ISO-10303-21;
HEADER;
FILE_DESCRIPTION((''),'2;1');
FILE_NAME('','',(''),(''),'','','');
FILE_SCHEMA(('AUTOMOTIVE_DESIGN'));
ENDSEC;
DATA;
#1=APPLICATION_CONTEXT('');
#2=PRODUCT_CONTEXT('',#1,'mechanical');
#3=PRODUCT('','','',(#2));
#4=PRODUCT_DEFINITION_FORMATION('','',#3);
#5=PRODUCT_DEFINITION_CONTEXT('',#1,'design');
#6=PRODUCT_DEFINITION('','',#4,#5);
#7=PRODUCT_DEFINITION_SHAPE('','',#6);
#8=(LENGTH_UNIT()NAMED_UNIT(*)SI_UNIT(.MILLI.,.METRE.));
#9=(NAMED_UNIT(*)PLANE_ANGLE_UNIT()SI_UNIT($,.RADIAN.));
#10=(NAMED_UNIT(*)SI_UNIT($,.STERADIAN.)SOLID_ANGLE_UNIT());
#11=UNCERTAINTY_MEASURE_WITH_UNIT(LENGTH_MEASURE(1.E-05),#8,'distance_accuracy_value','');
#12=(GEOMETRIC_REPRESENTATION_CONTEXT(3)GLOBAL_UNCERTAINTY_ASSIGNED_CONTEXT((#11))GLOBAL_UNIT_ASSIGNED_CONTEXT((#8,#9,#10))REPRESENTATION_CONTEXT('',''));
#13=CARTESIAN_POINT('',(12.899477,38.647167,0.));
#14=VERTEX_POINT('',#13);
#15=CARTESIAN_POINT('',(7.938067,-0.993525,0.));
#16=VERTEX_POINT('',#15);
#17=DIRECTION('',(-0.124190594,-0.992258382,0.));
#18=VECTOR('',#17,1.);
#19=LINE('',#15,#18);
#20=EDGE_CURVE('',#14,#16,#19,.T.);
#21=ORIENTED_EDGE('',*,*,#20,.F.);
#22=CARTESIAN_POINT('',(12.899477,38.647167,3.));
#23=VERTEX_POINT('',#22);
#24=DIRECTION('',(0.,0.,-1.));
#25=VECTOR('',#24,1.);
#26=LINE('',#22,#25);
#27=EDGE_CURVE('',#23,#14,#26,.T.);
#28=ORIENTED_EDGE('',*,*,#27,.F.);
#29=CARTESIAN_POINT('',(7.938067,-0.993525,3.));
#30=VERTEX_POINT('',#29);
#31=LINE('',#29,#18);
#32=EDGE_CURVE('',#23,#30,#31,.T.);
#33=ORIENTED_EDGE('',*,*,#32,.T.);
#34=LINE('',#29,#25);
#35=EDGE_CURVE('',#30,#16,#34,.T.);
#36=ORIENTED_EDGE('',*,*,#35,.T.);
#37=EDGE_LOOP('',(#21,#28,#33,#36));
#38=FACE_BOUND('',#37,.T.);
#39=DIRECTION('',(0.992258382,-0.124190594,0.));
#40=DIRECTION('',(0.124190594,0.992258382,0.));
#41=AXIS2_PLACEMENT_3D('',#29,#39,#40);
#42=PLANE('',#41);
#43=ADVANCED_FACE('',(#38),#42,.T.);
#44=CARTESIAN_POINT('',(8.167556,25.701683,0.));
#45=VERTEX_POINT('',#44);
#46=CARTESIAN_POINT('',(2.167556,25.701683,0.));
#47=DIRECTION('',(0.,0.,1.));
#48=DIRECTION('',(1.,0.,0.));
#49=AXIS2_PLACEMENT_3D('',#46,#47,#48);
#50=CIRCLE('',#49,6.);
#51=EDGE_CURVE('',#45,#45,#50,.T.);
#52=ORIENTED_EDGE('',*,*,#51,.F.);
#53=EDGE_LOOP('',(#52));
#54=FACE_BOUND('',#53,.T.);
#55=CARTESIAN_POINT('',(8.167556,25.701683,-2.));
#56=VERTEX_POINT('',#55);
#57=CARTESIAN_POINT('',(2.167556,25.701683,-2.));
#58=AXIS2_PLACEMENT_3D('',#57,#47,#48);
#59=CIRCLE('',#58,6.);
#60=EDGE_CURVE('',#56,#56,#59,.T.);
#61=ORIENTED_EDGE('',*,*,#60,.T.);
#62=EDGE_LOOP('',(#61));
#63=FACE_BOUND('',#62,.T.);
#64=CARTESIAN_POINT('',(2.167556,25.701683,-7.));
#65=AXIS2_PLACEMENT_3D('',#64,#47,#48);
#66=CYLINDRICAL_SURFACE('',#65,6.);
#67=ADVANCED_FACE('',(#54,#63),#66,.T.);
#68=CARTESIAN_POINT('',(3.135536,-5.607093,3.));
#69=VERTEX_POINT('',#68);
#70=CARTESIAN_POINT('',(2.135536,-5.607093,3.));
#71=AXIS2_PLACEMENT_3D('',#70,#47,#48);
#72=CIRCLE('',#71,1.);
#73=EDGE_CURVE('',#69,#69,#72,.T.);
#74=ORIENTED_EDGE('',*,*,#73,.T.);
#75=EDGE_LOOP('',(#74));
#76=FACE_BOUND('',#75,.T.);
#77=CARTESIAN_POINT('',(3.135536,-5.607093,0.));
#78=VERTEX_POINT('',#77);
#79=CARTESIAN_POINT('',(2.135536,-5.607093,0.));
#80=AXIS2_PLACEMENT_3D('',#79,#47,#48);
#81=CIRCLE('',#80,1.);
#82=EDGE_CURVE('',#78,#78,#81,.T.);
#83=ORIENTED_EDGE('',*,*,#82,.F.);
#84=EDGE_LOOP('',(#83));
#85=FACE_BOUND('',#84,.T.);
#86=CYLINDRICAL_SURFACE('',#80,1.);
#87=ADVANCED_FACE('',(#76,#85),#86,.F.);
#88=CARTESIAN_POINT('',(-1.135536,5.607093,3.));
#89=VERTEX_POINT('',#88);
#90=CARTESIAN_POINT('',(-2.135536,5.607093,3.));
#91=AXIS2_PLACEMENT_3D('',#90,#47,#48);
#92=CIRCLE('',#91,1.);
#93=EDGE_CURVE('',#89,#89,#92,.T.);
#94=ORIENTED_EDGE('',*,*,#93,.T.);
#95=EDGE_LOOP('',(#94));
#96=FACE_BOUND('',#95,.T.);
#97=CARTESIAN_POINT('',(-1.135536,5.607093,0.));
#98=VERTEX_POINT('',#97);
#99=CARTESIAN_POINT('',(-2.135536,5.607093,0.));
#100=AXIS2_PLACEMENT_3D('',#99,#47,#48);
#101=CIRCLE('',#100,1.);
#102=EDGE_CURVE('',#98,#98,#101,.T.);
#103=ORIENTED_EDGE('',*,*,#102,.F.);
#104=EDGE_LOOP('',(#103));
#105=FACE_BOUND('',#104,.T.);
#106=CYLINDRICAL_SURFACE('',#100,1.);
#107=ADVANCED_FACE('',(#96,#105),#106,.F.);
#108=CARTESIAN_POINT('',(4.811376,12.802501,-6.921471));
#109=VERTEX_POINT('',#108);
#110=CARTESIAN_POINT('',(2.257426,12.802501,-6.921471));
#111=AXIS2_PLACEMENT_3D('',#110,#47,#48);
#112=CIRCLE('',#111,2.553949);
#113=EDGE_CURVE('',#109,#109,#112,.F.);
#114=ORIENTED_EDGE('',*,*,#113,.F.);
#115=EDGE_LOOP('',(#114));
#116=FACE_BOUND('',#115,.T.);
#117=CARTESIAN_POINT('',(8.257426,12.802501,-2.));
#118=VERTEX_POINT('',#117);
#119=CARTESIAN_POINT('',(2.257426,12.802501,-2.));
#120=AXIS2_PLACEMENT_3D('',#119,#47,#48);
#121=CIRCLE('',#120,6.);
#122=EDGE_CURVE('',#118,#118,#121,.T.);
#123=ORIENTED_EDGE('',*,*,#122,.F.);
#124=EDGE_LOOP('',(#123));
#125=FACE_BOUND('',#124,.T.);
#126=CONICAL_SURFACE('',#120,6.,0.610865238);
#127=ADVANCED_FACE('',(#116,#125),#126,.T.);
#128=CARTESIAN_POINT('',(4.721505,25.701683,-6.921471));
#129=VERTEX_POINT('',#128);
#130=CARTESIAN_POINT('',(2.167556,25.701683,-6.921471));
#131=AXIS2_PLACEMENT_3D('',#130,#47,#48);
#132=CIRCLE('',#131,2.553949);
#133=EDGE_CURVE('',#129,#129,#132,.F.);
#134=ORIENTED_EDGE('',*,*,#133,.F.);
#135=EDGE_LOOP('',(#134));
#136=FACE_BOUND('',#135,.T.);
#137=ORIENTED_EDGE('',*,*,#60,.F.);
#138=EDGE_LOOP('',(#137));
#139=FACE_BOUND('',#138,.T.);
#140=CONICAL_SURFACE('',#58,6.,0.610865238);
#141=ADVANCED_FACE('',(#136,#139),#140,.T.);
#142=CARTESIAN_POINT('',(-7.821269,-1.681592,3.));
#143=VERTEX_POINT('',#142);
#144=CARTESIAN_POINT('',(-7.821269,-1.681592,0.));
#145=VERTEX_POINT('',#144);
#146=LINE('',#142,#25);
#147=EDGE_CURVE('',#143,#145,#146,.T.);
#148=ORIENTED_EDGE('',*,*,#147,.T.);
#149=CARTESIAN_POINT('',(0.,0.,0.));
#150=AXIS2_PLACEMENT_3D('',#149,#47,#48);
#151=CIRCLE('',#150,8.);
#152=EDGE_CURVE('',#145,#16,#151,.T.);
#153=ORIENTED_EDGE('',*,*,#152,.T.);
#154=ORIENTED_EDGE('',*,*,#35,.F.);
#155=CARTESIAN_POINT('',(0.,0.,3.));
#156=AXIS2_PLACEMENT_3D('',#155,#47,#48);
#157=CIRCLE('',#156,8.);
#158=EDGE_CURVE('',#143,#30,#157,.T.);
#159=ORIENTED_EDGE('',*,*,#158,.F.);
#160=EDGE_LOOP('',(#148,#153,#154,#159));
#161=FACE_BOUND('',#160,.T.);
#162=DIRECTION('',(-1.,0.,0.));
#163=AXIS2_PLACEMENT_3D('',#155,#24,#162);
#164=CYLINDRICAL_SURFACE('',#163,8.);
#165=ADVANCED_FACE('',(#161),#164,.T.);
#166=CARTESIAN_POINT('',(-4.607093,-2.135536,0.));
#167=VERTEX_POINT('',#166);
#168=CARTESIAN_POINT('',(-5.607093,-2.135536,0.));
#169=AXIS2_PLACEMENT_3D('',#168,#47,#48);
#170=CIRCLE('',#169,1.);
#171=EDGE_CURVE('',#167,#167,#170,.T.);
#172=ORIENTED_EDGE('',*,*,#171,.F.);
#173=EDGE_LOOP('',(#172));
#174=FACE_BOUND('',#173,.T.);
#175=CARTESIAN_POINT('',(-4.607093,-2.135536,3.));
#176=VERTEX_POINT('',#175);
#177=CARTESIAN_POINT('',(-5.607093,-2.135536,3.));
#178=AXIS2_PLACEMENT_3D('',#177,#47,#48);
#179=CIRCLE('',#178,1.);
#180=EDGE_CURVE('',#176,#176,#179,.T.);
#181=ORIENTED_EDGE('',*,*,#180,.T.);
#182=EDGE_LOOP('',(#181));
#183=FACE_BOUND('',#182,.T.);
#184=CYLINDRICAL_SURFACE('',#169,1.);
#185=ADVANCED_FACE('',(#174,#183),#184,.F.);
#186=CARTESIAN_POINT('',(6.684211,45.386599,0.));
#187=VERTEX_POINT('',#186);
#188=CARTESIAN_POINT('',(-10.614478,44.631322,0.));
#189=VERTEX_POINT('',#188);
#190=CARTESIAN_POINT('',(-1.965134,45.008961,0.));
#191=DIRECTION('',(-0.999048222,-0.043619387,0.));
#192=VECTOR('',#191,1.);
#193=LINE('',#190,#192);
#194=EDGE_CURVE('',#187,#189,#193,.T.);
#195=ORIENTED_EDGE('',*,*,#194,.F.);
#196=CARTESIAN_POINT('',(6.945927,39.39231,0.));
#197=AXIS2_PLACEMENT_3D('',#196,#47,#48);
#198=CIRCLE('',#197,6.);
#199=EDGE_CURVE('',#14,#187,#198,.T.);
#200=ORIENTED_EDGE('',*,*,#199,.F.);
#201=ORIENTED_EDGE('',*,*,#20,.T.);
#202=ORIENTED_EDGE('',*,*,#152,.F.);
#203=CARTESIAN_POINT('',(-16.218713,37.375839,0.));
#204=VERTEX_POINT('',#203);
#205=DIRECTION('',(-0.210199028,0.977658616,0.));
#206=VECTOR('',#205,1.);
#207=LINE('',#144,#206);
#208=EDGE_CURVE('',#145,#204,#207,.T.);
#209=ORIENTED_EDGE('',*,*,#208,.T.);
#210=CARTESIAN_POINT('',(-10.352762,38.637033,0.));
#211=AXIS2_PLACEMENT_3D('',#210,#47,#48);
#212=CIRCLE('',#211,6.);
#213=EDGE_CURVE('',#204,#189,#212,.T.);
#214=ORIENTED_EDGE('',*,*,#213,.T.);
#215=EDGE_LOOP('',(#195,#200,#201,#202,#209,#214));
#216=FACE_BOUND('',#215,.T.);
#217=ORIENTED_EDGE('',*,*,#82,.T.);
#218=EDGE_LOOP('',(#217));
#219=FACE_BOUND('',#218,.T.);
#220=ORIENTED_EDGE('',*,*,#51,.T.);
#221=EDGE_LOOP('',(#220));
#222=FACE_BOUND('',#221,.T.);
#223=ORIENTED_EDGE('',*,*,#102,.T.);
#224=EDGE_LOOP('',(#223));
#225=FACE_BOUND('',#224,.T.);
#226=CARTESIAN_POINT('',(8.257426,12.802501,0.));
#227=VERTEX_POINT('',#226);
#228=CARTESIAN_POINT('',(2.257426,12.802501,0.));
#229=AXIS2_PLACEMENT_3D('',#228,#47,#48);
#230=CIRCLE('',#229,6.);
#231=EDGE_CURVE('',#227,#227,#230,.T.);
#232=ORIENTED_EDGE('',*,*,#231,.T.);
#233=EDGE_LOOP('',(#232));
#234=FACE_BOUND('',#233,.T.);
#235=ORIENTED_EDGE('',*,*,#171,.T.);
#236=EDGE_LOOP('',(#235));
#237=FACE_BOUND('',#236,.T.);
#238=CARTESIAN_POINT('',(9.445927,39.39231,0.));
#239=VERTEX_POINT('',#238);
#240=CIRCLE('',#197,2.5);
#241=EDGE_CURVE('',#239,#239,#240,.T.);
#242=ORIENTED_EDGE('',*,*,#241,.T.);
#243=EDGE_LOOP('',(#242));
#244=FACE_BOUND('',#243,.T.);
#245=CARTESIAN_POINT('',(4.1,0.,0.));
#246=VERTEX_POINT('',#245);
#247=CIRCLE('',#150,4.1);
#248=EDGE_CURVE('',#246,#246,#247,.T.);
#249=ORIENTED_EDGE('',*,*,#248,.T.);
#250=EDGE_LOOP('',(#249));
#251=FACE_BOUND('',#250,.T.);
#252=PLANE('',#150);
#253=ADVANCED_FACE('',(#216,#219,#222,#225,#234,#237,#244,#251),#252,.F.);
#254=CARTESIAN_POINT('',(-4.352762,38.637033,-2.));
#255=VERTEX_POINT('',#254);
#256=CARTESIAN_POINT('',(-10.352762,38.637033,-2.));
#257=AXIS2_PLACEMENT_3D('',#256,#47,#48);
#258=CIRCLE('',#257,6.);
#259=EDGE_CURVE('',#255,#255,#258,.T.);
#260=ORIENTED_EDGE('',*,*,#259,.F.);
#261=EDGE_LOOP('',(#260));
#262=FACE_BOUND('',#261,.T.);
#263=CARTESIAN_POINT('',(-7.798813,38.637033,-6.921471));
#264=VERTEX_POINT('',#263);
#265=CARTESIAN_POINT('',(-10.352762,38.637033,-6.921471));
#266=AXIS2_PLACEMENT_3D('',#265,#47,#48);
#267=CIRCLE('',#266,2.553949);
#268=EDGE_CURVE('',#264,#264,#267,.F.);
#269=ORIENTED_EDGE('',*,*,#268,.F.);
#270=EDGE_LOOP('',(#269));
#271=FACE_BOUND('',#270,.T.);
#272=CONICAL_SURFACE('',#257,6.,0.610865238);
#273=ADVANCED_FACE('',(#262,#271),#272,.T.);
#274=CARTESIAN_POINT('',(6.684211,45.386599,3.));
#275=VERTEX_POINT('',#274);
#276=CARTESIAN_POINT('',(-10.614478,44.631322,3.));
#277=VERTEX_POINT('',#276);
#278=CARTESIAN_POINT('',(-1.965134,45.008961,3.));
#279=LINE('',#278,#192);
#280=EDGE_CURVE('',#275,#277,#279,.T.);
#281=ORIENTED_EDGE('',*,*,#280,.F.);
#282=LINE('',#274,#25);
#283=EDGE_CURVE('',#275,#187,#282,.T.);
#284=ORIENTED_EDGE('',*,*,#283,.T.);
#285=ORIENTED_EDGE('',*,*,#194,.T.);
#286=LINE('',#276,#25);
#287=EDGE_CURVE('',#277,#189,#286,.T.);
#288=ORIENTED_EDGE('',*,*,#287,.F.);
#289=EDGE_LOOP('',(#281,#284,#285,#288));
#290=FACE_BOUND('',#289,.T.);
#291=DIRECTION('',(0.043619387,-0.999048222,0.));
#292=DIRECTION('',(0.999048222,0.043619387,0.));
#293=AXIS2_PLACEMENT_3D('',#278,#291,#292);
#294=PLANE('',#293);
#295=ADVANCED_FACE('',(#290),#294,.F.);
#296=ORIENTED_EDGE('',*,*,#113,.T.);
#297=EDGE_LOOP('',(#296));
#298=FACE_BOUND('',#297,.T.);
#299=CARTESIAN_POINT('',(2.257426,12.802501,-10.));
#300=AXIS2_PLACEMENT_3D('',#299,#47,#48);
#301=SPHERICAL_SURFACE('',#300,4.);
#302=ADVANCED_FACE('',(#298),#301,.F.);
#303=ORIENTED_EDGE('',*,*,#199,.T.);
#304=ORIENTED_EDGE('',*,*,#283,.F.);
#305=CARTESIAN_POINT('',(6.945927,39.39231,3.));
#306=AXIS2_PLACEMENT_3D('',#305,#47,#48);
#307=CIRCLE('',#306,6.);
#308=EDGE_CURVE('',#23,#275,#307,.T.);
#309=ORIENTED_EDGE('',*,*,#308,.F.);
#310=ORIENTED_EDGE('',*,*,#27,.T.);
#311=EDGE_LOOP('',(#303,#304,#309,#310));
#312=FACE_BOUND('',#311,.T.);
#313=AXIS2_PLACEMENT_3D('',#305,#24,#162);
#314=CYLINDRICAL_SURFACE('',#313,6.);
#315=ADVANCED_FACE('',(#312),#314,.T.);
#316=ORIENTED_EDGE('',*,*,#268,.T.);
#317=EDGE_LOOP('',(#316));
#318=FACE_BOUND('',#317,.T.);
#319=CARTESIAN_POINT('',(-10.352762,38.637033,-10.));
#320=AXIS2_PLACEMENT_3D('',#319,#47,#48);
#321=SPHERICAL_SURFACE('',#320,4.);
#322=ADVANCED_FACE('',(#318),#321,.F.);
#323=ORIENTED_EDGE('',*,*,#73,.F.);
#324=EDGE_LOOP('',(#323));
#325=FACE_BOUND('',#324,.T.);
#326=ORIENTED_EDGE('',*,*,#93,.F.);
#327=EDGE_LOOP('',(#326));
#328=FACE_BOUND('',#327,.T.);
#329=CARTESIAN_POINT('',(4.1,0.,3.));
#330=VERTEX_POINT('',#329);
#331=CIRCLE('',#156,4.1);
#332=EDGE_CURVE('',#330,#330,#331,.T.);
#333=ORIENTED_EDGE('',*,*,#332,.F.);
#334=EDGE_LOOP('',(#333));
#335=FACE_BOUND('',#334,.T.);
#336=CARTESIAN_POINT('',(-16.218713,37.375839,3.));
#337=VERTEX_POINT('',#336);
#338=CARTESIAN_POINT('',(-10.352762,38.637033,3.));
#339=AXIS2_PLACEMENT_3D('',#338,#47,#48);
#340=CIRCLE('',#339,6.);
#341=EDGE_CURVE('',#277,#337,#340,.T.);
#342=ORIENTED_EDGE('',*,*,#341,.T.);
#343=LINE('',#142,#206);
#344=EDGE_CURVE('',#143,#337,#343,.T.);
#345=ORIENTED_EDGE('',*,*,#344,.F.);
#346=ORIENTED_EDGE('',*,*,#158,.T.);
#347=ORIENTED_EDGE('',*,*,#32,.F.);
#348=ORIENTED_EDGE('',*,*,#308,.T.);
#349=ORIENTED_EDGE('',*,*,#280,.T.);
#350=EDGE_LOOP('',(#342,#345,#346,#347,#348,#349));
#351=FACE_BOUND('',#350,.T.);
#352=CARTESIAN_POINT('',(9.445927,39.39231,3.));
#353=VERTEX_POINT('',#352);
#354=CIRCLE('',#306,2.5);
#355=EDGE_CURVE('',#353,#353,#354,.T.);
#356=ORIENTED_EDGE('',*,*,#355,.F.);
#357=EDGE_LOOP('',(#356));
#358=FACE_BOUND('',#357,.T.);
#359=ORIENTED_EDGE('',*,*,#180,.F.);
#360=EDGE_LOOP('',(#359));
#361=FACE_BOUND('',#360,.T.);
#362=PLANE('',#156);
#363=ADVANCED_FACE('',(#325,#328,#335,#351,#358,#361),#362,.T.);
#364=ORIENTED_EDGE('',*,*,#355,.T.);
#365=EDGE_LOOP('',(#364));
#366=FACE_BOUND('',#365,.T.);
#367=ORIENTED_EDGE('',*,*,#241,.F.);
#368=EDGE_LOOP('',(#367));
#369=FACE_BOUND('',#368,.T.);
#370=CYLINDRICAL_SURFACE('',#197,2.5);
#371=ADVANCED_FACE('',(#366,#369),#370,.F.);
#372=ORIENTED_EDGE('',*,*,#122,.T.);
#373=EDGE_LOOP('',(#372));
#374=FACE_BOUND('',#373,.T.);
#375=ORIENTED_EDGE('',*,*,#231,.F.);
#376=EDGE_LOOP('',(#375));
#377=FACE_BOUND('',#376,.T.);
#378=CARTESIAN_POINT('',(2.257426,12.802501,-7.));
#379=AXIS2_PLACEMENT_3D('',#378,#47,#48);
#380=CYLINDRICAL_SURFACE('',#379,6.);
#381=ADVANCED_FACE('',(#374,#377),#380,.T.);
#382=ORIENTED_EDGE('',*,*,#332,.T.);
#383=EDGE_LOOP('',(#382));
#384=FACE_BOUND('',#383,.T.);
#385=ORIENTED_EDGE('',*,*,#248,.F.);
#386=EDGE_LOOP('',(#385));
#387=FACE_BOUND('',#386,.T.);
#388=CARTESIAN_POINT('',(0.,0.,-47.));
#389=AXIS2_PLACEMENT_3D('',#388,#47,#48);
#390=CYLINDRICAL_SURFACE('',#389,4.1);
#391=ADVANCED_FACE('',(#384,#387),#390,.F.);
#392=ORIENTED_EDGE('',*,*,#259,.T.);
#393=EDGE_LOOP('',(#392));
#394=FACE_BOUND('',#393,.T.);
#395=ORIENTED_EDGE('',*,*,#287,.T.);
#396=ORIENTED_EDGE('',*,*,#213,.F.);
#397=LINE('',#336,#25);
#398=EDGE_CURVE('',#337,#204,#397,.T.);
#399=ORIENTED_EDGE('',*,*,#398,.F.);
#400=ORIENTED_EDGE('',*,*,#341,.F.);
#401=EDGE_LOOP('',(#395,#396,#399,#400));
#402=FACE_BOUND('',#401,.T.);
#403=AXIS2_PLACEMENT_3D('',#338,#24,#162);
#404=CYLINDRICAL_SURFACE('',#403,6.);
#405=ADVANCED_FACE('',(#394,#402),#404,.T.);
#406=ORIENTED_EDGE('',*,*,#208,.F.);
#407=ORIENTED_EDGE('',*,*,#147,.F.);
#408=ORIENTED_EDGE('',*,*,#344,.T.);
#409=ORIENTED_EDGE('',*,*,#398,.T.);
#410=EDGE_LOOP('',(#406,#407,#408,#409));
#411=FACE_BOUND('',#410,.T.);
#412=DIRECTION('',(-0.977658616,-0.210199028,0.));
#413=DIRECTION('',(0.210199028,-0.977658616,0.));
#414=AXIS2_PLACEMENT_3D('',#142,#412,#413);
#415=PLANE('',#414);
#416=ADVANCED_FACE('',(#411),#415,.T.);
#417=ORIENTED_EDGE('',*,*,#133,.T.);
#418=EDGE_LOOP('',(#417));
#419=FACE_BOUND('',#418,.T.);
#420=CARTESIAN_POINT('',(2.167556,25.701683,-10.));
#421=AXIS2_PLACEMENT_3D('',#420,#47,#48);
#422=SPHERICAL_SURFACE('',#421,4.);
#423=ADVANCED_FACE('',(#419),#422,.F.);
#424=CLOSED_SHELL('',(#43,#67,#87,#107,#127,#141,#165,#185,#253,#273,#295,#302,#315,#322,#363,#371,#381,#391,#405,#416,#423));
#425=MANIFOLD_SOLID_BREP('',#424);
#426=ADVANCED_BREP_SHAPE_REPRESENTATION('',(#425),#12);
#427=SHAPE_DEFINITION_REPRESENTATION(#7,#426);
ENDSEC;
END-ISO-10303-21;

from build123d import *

# Parameters (mm, degrees)
BOSS_EXTRUDE1_DEPTH = 3
BOSS_EXTRUDE5_DEPTH = 3
SKETCH3_R           = 4.1
CUT_EXTRUDE1_DEPTH  = 50
BOSS_EXTRUDE2_START = -7
SKETCH1_3_R         = 6
BOSS_EXTRUDE2_DEPTH = 7
SKETCH1_4_R         = 6
BOSS_EXTRUDE3_DEPTH = 7
SKETCH1_5_R         = 6
BOSS_EXTRUDE6_DEPTH = 7
CHAMFER8_SIZE       = 5
CHAMFER8_SIZE_2     = 3.501037691
SKETCH9_R           = 1
CUT_EXTRUDE3_DEPTH  = 3
SKETCH13_R          = 2.5
CUT_EXTRUDE4_DEPTH  = 3


with BuildPart() as part:
    # Sketch1 → Boss-Extrude1 (new body)
    with BuildSketch(Plane.XY):
        with BuildLine():
            Line((8.47879639, 27.808299752), (-6.041521678, 42.809946731))
            ThreePointArc((-6.041521678, 42.809946731), (-13.178830457, 43.929795654), (-16.218713498, 37.375838886))
            Line((-16.218713498, 37.375838886), (-7.821268925, -1.68159222))
            ThreePointArc((-7.821268925, -1.68159222), (0.48240993, -7.985441795), (7.966824047, -0.727814955))
            Line((7.966824047, -0.727814955), (10.142674299, 23.089524856))
            ThreePointArc((10.142674299, 23.089524856), (9.826089659, 25.630630372), (8.47879639, 27.808299752))
        make_face()
    extrude(amount=BOSS_EXTRUDE1_DEPTH)

    # Sketch10 → Boss-Extrude5 (add)
    with BuildSketch(Plane.XY):
        with BuildLine():
            Line((-6.041521678, 42.809946731), (8.47879639, 27.808299752))
            ThreePointArc((8.47879639, 27.808299752), (9.826089659, 25.630630372), (10.142674299, 23.089524856))
            Line((10.142674299, 23.089524856), (7.966824047, -0.727814955))
            ThreePointArc((7.966824047, -0.727814955), (7.953555222, -0.86078995), (7.938067055, -0.993524752))
            Line((7.938067055, -0.993524752), (12.899477398, 38.647166557))
            ThreePointArc((12.899477398, 38.647166557), (11.356622336, 43.459959023), (6.684210782, 45.38659945))
            Line((6.684210782, 45.38659945), (-10.614478128, 44.631322381))
            ThreePointArc((-10.614478128, 44.631322381), (-8.13262373, 44.211168584), (-6.041521678, 42.809946731))
        make_face()
    extrude(amount=BOSS_EXTRUDE5_DEPTH)

    # Sketch3 → Cut-Extrude1 (cut)
    with BuildSketch(Plane.XY.offset(3)):
        Circle(SKETCH3_R)
    extrude(amount=-CUT_EXTRUDE1_DEPTH, mode=Mode.SUBTRACT)

    # Sketch1<3> → Boss-Extrude2 (add)
    with BuildSketch(Plane.XY.offset(BOSS_EXTRUDE2_START)):
        with Locations(Location((-10.352761804, 38.637033052, 0), (0, 0, 192.134016017))):
            Circle(SKETCH1_3_R)
    extrude(amount=BOSS_EXTRUDE2_DEPTH)

    # Sketch1<4> → Boss-Extrude3 (add)
    with BuildSketch(Plane.XY):
        with Locations((2.167556264, 25.701683368)):
            Circle(SKETCH1_4_R)
    extrude(amount=-BOSS_EXTRUDE3_DEPTH)

    # Sketch1<5> → Boss-Extrude6 (add)
    with BuildSketch(Plane.XY):
        with Locations((2.25742631, 12.802500789)):
            Circle(SKETCH1_5_R)
    extrude(amount=-BOSS_EXTRUDE6_DEPTH)

    # Sketch6 one side → Cut-Revolve1 (revolve, cut)
    with BuildSketch(Plane(origin=(-10.352761804, 0, 0), x_dir=(0, 0, -1), z_dir=(1, 0, 0))):
        with BuildLine():
            ThreePointArc((10, 34.637033052), (12.828427125, 35.808605927), (14, 38.637033052))
            ThreePointArc((14, 38.637033052), (12.828427125, 41.465460176), (10, 42.637033052))
            Line((10, 42.637033052), (10, 34.637033052))
        make_face()
    revolve(axis=Axis((-10.352761804, 42.637033052, -10), (0, -1, 0)), mode=Mode.SUBTRACT)

    # Sketch7 one side → Cut-Revolve2 (revolve, cut)
    with BuildSketch(Plane(origin=(2.167556264, 0, 0), x_dir=(0, 0, -1), z_dir=(1, 0, 0))):
        with BuildLine():
            ThreePointArc((10, 21.701683368), (12.828427125, 22.873256243), (14, 25.701683368))
            ThreePointArc((14, 25.701683368), (12.828427125, 28.530110493), (10, 29.701683368))
            Line((10, 29.701683368), (10, 21.701683368))
        make_face()
    revolve(axis=Axis((2.167556264, 29.701683368, -10), (0, -1, 0)), mode=Mode.SUBTRACT)

    # Sketch14 one side → Cut-Revolve3 (revolve, cut)
    with BuildSketch(Plane(origin=(2.25742631, 0, 0), x_dir=(0, 0, -1), z_dir=(1, 0, 0))):
        with BuildLine():
            ThreePointArc((10, 8.802500789), (12.828427125, 9.974073664), (14, 12.802500789))
            ThreePointArc((14, 12.802500789), (12.828427125, 15.630927914), (10, 16.802500789))
            Line((10, 16.802500789), (10, 8.802500789))
        make_face()
    revolve(axis=Axis((2.25742631, 16.802500789, -10), (0, -1, 0)), mode=Mode.SUBTRACT)

    # Chamfer8
    # the kernel refuses this chamfer: 5, 3.501037691 mm, written as the material it takes off along each edge
    with BuildSketch(Plane(origin=(-10.352761804, 38.637033052, -7), x_dir=(-0.9776586156884893, -0.21019902751931718, 0), z_dir=(-0.21019902751931718, 0.9776586156884893, 0))) as chamfer8_piece_1:
        Polygon((6, CHAMFER8_SIZE), (6 - CHAMFER8_SIZE_2, 0), (6, 0), align=None)
    revolve(axis=Axis((-10.352761804, 38.637033052, -7), (0, 0, 1)), mode=Mode.SUBTRACT)
    with BuildSketch(Plane(origin=(2.167556264, 25.701683368, -7), x_dir=(1, 0, 0), z_dir=(0, -1, 0))) as chamfer8_piece_2:
        Polygon((6, CHAMFER8_SIZE), (6 - CHAMFER8_SIZE_2, 0), (6, 0), align=None)
    revolve(axis=Axis((2.167556264, 25.701683368, -7), (0, 0, 1)), mode=Mode.SUBTRACT)
    with BuildSketch(Plane(origin=(2.25742631, 12.802500789, -7), x_dir=(1, 0, 0), z_dir=(0, -1, 0))) as chamfer8_piece_3:
        Polygon((6, CHAMFER8_SIZE), (6 - CHAMFER8_SIZE_2, 0), (6, 0), align=None)
    revolve(axis=Axis((2.25742631, 12.802500789, -7), (0, 0, 1)), mode=Mode.SUBTRACT)

    # Sketch9 → Cut-Extrude3 (cut)
    with BuildSketch(Plane.XY.offset(3)):
        with Locations((-2.135535698, 5.607092587)):
            Circle(SKETCH9_R)
        with Locations((2.135535698, -5.607092587)):
            Circle(SKETCH9_R)
        with Locations((-5.607092587, -2.135535698)):
            Circle(SKETCH9_R)
    extrude(amount=-CUT_EXTRUDE3_DEPTH, mode=Mode.SUBTRACT)

    # Sketch13 → Cut-Extrude4 (cut)
    with BuildSketch(Plane.XY.offset(3)):
        with Locations((6.945927107, 39.39231012)):
            Circle(SKETCH13_R)
    extrude(amount=-CUT_EXTRUDE4_DEPTH, mode=Mode.SUBTRACT)


solid = part.part
